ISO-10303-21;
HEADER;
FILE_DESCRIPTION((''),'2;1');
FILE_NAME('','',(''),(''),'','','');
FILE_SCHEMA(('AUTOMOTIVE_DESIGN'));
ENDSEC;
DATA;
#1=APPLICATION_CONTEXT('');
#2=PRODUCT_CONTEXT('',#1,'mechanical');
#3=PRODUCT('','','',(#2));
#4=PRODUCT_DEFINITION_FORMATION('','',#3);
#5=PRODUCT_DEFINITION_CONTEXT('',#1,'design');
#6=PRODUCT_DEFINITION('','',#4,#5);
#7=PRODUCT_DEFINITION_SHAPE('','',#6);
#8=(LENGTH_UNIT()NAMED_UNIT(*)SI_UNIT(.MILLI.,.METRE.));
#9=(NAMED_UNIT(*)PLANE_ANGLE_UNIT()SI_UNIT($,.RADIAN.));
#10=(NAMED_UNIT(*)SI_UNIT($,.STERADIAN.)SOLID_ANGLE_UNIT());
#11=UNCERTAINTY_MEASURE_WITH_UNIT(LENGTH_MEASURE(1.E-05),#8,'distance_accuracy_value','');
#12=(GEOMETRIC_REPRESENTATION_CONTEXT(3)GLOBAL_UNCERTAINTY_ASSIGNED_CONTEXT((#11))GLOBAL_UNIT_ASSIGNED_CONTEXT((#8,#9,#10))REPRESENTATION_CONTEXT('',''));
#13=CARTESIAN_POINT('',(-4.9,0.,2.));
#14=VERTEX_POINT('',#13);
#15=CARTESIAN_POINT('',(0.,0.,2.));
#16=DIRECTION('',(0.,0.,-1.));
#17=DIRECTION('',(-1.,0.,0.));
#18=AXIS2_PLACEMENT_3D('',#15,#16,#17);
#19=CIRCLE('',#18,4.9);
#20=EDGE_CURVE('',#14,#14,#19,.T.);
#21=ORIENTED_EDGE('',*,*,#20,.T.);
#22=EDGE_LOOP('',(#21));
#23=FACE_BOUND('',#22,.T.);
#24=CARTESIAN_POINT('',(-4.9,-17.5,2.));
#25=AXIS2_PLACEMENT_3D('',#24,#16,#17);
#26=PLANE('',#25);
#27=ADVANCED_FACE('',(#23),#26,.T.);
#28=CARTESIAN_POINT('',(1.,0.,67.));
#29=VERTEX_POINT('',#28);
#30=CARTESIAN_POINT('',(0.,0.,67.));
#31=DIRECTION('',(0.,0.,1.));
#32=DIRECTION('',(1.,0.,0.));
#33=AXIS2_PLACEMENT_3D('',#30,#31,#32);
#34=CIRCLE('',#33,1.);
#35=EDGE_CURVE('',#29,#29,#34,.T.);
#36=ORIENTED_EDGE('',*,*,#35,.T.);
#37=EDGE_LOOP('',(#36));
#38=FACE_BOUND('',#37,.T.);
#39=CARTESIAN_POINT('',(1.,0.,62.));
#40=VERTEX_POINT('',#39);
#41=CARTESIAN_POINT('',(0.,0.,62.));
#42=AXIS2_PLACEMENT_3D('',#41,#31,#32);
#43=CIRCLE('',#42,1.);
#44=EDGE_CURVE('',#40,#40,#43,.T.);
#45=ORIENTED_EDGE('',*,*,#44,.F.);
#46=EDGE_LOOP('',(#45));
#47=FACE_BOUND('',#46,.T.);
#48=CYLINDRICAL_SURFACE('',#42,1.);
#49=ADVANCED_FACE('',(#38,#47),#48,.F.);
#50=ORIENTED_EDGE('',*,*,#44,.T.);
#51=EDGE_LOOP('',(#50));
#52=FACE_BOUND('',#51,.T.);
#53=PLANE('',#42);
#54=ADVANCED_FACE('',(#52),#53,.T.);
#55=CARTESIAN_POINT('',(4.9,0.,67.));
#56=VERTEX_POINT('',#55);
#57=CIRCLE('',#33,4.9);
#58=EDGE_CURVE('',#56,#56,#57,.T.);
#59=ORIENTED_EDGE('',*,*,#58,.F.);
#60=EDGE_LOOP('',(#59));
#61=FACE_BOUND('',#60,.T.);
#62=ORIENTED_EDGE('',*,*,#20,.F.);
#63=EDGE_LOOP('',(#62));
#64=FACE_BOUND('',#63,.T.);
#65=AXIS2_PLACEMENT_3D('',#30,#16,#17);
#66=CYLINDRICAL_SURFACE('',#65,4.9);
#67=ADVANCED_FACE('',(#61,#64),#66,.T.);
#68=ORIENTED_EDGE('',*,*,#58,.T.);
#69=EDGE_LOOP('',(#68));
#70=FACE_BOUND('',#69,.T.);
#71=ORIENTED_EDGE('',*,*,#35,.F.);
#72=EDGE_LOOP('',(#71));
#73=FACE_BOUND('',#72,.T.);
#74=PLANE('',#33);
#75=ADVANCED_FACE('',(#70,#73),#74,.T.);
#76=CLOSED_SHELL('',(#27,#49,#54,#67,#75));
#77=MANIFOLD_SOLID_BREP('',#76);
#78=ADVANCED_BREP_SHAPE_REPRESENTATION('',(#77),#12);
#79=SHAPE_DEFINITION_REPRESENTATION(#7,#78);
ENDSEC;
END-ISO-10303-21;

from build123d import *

# Parameters (mm, degrees)
P_IDAT_VYSUNUT_M1_DEPTH       = 2
VYSUNOUT_TENKOST_NN_2_DEPTH   = 2
SKICA4_R                      = 4.9
P_IDAT_VYSUNUT_M2_DEPTH       = 65
SKICA5_R                      = 1
ODEBRAT_VYSUNUT_M1_DEPTH      = 5
P_IDAT_VYSUNUT_M3_DEPTH       = 2
P_IDAT_VYSUNUT_M4_DEPTH       = 2
ODEBRAT_VYSUNUT_M2_DEPTH      = 94.281831028
ODEBRAT_VYSUNUT_M2_DEPTH_BACK = 94.281831028
SKICA8_OUTSIDE_W              = 95.448
SKICA8_OUTSIDE_H              = 89.948
SKICA8_OUTSIDE_W_2            = 9.9
SKICA8_OUTSIDE_H_2            = 65


# Read off the part's stored shape, not the designer's step: Rozdělit1
with BuildPart() as part:
    # Skica1 → Přidat vysunutím1 (new body)
    with BuildSketch(Plane.XY):
        with BuildLine():
            Line((0, 5), (-60, 5))
            Line((-60, 5), (-60, -5))
            Line((-60, -5), (0, -5))
            ThreePointArc((0, -5), (5, 0), (0, 5))
        make_face()
    extrude(amount=P_IDAT_VYSUNUT_M1_DEPTH)

    # Skica3 → Vysunout tenkostěnný2 (add)
    with BuildSketch(Plane.XY):
        with BuildLine():
            Line((-50, -16.5), (-60, -16.5))
            ThreePointArc((-60, -16.5), (-61.5, -15), (-60, -13.5))
            Line((-60, -13.5), (-50, -13.5))
            ThreePointArc((-50, -13.5), (-47.5, -11), (-50, -8.5))
            Line((-50, -8.5), (-60, -8.5))
            ThreePointArc((-60, -8.5), (-61.5, -7), (-60, -5.5))
            Line((-60, -5.5), (-50, -5.5))
            Line((-50, -5.5), (-50, -4.5))
            Line((-50, -4.5), (-60, -4.5))
            ThreePointArc((-60, -4.5), (-62.5, -7), (-60, -9.5))
            Line((-60, -9.5), (-50, -9.5))
            ThreePointArc((-50, -9.5), (-48.5, -11), (-50, -12.5))
            Line((-50, -12.5), (-60, -12.5))
            ThreePointArc((-60, -12.5), (-62.5, -15), (-60, -17.5))
            Line((-60, -17.5), (-50, -17.5))
            Line((-50, -17.5), (-50, -16.5))
        make_face()
    extrude(amount=VYSUNOUT_TENKOST_NN_2_DEPTH)


with BuildPart() as body_2:
    # Rozdělit1: the piece on the far side of the plane
    add(part.part)
    split(bisect_by=Plane(origin=(0, 0, 0), x_dir=(1, 0, 0), z_dir=(0, 1, 0)), keep=Keep.BOTTOM)

    # Zrcadlit3: body 2 across plane


with BuildPart() as part_1:
    add(part.part)

    # Rozdělit1
    split(bisect_by=Plane(origin=(0, 0, 0), x_dir=(1, 0, 0), z_dir=(0, 1, 0)), keep=Keep.TOP)


with BuildPart() as body_2_1:
    add(body_2.part)
    add(body_2.part.mirror(Plane.ZX))

    # Skica4 → Přidat vysunutím2 (add)
    with BuildSketch(Plane.XY.offset(2)):
        Circle(SKICA4_R)
    extrude(amount=P_IDAT_VYSUNUT_M2_DEPTH)

    # Skica5 → Odebrat vysunutím1 (cut)
    with BuildSketch(Plane.XY.offset(67)):
        Circle(SKICA5_R)
    extrude(amount=-ODEBRAT_VYSUNUT_M1_DEPTH, mode=Mode.SUBTRACT)

    # Skica6 → Přidat vysunutím3 (add)
    with BuildSketch(Plane(origin=(0, 0, 0), x_dir=(-1, 0, 0), z_dir=(0, 0, -1))):
        with BuildLine():
            Line((0, 5), (-5, 5))
            ThreePointArc((-5, 5), (-10, 0), (-5, -5))
            Line((-5, -5), (0, -5))
            ThreePointArc((0, -5), (-5, 0), (0, 5))
        make_face()
    extrude(amount=-P_IDAT_VYSUNUT_M3_DEPTH)

    # Skica7 → Přidat vysunutím4 (add)
    with BuildSketch(Plane.XY.offset(2)):
        with BuildLine():
            Line((-50, 5), (-50, -5))
            Line((-50, -5), (-50, -5.5))
            Line((-50, -5.5), (-60, -5.5))
            ThreePointArc((-60, -5.5), (-61.5, -7), (-60, -8.5))
            Line((-60, -8.5), (-50, -8.5))
            ThreePointArc((-50, -8.5), (-47.5, -11), (-50, -13.5))
            Line((-50, -13.5), (-60, -13.5))
            ThreePointArc((-60, -13.5), (-61.5, -15), (-60, -16.5))
            Line((-60, -16.5), (-50, -16.5))
            Line((-50, -16.5), (-50, -17.5))
            Line((-50, -17.5), (-60, -17.5))
            ThreePointArc((-60, -17.5), (-62.5, -15), (-60, -12.5))
            Line((-60, -12.5), (-50, -12.5))
            ThreePointArc((-50, -12.5), (-48.5, -11), (-50, -9.5))
            Line((-50, -9.5), (-60, -9.5))
            ThreePointArc((-60, -9.5), (-62.5, -7), (-60, -4.5))
            Line((-60, -4.5), (-60, 4.5))
            ThreePointArc((-60, 4.5), (-62.5, 7), (-60, 9.5))
            Line((-60, 9.5), (-50, 9.5))
            ThreePointArc((-50, 9.5), (-48.5, 11), (-50, 12.5))
            Line((-50, 12.5), (-60, 12.5))
            ThreePointArc((-60, 12.5), (-62.5, 15), (-60, 17.5))
            Line((-60, 17.5), (-50, 17.5))
            Line((-50, 17.5), (-50, 16.5))
            Line((-50, 16.5), (-60, 16.5))
            ThreePointArc((-60, 16.5), (-61.5, 15), (-60, 13.5))
            Line((-60, 13.5), (-50, 13.5))
            ThreePointArc((-50, 13.5), (-47.5, 11), (-50, 8.5))
            Line((-50, 8.5), (-60, 8.5))
            ThreePointArc((-60, 8.5), (-61.5, 7), (-60, 5.5))
            Line((-60, 5.5), (-50, 5.5))
            Line((-50, 5.5), (-50, 5))
        make_face()
    extrude(amount=P_IDAT_VYSUNUT_M4_DEPTH)

    # Skica8 outside → Odebrat vysunutím2 (cut, two sides: drawn at the far end of the back side and taken through both)
    with BuildSketch(Plane(origin=(0, 0, 0), x_dir=(1, 0, 0), z_dir=(0, 1, 0)).offset(-ODEBRAT_VYSUNUT_M2_DEPTH_BACK)):
        with Locations((-26.25, -33.5)):
            Rectangle(SKICA8_OUTSIDE_W, SKICA8_OUTSIDE_H)
        with Locations((0.05, -34.5)):
            Rectangle(SKICA8_OUTSIDE_W_2, SKICA8_OUTSIDE_H_2, mode=Mode.SUBTRACT)
    extrude(amount=ODEBRAT_VYSUNUT_M2_DEPTH + ODEBRAT_VYSUNUT_M2_DEPTH_BACK, mode=Mode.SUBTRACT)


solid = body_2_1.part
